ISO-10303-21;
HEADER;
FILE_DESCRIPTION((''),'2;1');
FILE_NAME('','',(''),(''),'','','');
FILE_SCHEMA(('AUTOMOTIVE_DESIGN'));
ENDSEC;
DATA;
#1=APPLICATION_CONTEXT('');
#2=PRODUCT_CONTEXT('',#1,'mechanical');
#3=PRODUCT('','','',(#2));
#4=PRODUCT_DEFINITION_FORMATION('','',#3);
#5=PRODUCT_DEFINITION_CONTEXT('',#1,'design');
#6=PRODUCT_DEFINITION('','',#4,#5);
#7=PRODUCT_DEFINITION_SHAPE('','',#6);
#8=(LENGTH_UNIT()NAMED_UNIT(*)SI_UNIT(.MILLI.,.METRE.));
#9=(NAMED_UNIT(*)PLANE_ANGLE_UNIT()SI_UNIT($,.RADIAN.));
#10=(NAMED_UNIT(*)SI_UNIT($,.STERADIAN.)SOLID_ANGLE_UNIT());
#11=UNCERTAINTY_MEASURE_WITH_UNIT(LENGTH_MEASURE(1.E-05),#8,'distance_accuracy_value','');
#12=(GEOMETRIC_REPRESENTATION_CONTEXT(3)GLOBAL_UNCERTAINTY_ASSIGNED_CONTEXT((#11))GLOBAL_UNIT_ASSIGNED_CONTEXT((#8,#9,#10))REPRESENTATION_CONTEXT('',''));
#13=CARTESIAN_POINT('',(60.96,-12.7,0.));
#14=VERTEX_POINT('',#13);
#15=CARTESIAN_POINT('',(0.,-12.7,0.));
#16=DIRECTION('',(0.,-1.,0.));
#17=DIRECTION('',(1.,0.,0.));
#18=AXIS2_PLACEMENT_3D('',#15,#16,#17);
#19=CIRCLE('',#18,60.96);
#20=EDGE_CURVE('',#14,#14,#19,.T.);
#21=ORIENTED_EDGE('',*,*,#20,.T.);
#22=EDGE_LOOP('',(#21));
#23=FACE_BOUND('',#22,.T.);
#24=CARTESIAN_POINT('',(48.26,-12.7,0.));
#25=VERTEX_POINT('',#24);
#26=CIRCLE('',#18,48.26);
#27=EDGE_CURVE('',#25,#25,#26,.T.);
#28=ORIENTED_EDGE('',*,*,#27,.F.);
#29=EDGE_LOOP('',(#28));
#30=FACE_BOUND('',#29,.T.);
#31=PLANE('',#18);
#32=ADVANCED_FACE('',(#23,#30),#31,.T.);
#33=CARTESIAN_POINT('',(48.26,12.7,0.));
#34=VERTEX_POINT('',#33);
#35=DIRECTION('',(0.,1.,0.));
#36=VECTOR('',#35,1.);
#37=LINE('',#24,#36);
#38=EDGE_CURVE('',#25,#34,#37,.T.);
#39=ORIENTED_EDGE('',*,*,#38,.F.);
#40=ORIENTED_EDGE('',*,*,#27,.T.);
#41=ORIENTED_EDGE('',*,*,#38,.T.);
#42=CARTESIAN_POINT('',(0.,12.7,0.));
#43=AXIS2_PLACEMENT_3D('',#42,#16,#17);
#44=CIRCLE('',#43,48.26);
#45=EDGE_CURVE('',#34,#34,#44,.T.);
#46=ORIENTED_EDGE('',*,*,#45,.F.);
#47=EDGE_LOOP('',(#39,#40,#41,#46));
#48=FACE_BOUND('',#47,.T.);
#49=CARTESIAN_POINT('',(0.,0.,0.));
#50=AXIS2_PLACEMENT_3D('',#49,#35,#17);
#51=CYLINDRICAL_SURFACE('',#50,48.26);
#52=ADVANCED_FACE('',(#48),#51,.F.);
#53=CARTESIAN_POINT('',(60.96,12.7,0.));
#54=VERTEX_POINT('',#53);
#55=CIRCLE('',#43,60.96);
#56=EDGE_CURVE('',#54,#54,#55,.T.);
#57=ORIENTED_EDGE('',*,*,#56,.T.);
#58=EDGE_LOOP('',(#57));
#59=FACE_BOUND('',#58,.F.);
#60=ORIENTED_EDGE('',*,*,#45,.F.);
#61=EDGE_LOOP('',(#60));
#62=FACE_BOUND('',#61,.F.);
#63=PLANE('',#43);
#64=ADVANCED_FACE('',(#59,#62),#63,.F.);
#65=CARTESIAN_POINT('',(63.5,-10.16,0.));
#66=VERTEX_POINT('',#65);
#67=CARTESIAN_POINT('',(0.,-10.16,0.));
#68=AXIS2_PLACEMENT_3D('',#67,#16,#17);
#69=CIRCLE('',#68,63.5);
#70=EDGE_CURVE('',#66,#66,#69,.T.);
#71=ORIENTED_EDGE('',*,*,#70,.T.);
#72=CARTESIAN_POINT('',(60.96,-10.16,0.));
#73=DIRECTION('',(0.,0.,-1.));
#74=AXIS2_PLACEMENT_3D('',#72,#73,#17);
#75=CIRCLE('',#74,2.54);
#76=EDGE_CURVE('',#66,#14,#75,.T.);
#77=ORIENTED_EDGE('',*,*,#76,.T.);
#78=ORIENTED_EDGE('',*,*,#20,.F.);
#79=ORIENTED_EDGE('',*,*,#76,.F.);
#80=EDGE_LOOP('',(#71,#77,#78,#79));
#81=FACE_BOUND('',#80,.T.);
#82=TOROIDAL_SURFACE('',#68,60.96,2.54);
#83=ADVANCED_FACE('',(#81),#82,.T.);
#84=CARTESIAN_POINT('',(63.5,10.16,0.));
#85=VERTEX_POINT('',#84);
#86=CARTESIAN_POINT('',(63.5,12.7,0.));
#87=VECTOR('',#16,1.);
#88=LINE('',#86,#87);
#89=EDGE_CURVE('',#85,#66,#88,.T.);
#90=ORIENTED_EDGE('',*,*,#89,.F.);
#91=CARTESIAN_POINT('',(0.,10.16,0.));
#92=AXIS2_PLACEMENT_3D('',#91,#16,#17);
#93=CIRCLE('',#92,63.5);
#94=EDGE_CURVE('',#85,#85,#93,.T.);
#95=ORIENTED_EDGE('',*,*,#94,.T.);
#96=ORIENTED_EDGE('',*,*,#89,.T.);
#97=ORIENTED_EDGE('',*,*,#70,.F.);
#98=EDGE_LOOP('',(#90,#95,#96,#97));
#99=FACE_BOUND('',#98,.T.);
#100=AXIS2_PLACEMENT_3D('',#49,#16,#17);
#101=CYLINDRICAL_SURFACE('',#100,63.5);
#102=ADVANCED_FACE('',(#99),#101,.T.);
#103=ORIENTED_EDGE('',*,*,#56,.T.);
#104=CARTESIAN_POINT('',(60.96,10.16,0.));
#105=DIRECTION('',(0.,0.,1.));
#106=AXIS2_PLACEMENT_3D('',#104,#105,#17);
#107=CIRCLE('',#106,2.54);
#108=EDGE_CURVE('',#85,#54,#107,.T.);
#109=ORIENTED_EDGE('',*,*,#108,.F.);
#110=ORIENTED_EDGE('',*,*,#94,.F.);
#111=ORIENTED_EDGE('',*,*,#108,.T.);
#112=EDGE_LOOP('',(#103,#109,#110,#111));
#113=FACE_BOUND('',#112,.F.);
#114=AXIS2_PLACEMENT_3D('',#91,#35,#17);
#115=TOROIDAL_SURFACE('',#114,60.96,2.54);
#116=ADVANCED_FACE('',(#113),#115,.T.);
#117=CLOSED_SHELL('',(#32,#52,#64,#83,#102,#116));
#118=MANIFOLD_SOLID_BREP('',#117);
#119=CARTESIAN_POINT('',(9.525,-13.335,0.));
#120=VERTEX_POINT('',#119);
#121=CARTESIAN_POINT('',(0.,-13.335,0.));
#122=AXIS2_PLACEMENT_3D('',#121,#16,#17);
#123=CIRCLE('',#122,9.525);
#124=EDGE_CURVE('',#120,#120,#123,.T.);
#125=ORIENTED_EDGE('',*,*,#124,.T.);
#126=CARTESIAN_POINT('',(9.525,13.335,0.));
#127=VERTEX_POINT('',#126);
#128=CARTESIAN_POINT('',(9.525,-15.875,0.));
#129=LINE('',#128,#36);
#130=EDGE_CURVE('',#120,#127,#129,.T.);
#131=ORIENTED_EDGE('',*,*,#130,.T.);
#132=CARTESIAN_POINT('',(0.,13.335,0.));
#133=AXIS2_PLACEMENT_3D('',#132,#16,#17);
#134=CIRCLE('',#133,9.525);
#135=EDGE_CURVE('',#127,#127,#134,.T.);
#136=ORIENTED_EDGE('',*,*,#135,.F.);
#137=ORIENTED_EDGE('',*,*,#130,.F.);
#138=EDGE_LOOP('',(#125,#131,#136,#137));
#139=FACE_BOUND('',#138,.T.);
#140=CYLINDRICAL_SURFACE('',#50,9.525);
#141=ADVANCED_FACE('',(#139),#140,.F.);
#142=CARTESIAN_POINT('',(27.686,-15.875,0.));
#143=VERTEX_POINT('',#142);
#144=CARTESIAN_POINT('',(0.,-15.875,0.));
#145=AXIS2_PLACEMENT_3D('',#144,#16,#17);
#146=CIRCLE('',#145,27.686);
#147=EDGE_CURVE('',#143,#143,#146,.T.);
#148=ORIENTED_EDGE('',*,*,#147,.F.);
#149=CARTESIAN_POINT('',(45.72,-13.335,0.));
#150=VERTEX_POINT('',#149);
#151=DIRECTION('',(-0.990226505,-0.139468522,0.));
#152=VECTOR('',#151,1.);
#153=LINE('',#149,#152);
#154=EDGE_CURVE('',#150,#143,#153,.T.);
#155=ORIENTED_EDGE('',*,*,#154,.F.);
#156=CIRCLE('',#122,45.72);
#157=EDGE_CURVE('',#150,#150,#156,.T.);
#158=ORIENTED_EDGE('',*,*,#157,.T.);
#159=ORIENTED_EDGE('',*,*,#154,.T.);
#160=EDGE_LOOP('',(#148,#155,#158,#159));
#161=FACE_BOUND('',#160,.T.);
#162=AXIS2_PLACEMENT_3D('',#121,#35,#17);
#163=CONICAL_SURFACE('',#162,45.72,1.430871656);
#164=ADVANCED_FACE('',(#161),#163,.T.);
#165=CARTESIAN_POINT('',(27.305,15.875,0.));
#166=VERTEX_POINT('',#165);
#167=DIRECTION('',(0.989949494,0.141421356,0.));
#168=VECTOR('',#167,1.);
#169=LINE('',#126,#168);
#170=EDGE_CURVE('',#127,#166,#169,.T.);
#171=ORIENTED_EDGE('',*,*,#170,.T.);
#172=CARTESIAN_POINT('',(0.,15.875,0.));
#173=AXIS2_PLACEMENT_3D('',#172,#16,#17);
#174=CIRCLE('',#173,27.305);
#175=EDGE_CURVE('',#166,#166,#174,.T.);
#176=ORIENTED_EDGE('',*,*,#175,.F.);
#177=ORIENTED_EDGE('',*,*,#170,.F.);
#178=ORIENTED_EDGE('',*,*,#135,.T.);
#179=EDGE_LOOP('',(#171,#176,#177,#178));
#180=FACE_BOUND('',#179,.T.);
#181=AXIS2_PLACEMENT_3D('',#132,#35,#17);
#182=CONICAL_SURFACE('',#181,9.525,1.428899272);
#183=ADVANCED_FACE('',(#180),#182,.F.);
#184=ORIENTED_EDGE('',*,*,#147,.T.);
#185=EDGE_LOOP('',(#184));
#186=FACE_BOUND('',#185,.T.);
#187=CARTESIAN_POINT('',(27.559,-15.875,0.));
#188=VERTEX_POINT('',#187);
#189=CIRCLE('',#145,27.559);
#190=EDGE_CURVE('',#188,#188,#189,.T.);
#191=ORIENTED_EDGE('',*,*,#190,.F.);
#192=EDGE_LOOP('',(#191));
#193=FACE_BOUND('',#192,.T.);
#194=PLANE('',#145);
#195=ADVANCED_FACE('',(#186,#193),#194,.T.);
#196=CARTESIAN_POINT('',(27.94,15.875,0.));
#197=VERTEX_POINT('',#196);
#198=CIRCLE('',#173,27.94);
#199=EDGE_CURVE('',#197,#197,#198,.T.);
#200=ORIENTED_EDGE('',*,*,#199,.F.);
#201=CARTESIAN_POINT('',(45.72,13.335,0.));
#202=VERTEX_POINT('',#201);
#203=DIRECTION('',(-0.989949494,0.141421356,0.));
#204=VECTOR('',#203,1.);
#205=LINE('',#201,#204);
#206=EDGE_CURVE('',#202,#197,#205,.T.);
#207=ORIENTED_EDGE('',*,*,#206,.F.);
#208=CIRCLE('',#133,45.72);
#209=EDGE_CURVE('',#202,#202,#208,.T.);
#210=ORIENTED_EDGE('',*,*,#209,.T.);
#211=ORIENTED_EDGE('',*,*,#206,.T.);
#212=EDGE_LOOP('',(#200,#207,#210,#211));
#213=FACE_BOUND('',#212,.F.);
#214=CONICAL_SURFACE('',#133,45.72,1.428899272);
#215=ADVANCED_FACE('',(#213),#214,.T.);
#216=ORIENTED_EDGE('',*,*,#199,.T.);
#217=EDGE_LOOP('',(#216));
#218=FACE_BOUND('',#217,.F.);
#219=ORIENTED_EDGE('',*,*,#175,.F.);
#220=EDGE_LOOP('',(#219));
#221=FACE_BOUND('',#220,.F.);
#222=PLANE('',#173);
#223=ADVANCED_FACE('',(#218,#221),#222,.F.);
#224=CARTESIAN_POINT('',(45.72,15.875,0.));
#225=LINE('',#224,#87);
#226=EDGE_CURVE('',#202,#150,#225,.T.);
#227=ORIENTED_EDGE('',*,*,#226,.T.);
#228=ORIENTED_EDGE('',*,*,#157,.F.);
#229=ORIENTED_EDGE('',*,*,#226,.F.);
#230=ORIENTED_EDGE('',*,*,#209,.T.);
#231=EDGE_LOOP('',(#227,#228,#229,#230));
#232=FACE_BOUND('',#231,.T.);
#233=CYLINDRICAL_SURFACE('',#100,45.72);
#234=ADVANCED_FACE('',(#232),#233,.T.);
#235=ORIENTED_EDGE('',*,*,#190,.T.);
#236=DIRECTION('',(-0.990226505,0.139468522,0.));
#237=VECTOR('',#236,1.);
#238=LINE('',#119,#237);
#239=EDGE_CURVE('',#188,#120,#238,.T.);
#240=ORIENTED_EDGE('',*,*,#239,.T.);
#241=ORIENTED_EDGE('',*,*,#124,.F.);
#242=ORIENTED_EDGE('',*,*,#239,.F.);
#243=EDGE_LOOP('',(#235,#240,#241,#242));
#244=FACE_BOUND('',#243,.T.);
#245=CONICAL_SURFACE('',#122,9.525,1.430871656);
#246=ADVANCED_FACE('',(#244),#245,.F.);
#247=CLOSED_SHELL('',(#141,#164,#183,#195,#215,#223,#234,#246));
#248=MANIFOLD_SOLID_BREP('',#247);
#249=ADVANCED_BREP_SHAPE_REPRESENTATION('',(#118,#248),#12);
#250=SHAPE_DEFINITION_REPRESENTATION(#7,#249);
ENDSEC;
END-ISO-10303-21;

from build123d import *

# Parameters (mm, degrees)
F0_R        = 63.5
F0_R_2      = 48.26
F1_DEPTH    = 12.7
F2_R        = 2.54
F3_R        = 45.72
F3_R_2      = 9.525
F4_DEPTH    = 15.875
F5_C1_SIZE2 = 18.034
F5_C1_SIZE  = 2.54
F5_C2_SIZE2 = 2.54
F5_C2_SIZE  = 18.034
F6_SIZE2    = 17.78
F6_SIZE     = 2.54


with BuildPart() as f1:
    # F0 (on Front) → F1 (new body, symmetric)
    with BuildSketch(Plane.XZ):
        Circle(F0_R)
        Circle(F0_R_2, mode=Mode.SUBTRACT)
    extrude(amount=F1_DEPTH, both=True)

    # F2
    f2_edges = [f1.edges().sort_by_distance(p)[0] for p in [
        (-63.5, 12.7, 0),
        (63.5, 0, 0),
        (-63.5, -12.7, 0),
    ]]
    fillet(f2_edges, radius=F2_R)


with BuildPart() as f4:
    # F3 (on Front) → F4 (new body, symmetric)
    with BuildSketch(Plane.XZ):
        Circle(F3_R)
        Circle(F3_R_2, mode=Mode.SUBTRACT)
    extrude(amount=F4_DEPTH, both=True)

    # F5: chamfer of 18.034 x 2.54 on 2 edges, made by hand

    # F5_c1
    f5_c1_edges = [f4.edges().sort_by_distance(p)[0] for p in [
        (-45.72, -15.875, 0),
    ]]
    f5_c1_side = f4.faces().sort_by_distance((-45.72, -15.8242, 0))[0]
    chamfer(f5_c1_edges, length=F5_C1_SIZE, length2=F5_C1_SIZE2, reference=f5_c1_side)

    # F5_c2
    f5_c2_edges = [f4.edges().sort_by_distance(p)[0] for p in [
        (-9.525, -15.875, 0),
    ]]
    f5_c2_side = f4.faces().sort_by_distance((-9.5758, -15.875, 0))[0]
    chamfer(f5_c2_edges, length=F5_C2_SIZE, length2=F5_C2_SIZE2, reference=f5_c2_side)

    # F6
    f6_edges = [f4.edges().sort_by_distance(p)[0] for p in [
        (-45.72, 15.875, 0),
        (-9.525, 15.875, 0),
    ]]
    chamfer(f6_edges, length=F6_SIZE, length2=F6_SIZE2)


solid = Compound([f1.part, f4.part])
